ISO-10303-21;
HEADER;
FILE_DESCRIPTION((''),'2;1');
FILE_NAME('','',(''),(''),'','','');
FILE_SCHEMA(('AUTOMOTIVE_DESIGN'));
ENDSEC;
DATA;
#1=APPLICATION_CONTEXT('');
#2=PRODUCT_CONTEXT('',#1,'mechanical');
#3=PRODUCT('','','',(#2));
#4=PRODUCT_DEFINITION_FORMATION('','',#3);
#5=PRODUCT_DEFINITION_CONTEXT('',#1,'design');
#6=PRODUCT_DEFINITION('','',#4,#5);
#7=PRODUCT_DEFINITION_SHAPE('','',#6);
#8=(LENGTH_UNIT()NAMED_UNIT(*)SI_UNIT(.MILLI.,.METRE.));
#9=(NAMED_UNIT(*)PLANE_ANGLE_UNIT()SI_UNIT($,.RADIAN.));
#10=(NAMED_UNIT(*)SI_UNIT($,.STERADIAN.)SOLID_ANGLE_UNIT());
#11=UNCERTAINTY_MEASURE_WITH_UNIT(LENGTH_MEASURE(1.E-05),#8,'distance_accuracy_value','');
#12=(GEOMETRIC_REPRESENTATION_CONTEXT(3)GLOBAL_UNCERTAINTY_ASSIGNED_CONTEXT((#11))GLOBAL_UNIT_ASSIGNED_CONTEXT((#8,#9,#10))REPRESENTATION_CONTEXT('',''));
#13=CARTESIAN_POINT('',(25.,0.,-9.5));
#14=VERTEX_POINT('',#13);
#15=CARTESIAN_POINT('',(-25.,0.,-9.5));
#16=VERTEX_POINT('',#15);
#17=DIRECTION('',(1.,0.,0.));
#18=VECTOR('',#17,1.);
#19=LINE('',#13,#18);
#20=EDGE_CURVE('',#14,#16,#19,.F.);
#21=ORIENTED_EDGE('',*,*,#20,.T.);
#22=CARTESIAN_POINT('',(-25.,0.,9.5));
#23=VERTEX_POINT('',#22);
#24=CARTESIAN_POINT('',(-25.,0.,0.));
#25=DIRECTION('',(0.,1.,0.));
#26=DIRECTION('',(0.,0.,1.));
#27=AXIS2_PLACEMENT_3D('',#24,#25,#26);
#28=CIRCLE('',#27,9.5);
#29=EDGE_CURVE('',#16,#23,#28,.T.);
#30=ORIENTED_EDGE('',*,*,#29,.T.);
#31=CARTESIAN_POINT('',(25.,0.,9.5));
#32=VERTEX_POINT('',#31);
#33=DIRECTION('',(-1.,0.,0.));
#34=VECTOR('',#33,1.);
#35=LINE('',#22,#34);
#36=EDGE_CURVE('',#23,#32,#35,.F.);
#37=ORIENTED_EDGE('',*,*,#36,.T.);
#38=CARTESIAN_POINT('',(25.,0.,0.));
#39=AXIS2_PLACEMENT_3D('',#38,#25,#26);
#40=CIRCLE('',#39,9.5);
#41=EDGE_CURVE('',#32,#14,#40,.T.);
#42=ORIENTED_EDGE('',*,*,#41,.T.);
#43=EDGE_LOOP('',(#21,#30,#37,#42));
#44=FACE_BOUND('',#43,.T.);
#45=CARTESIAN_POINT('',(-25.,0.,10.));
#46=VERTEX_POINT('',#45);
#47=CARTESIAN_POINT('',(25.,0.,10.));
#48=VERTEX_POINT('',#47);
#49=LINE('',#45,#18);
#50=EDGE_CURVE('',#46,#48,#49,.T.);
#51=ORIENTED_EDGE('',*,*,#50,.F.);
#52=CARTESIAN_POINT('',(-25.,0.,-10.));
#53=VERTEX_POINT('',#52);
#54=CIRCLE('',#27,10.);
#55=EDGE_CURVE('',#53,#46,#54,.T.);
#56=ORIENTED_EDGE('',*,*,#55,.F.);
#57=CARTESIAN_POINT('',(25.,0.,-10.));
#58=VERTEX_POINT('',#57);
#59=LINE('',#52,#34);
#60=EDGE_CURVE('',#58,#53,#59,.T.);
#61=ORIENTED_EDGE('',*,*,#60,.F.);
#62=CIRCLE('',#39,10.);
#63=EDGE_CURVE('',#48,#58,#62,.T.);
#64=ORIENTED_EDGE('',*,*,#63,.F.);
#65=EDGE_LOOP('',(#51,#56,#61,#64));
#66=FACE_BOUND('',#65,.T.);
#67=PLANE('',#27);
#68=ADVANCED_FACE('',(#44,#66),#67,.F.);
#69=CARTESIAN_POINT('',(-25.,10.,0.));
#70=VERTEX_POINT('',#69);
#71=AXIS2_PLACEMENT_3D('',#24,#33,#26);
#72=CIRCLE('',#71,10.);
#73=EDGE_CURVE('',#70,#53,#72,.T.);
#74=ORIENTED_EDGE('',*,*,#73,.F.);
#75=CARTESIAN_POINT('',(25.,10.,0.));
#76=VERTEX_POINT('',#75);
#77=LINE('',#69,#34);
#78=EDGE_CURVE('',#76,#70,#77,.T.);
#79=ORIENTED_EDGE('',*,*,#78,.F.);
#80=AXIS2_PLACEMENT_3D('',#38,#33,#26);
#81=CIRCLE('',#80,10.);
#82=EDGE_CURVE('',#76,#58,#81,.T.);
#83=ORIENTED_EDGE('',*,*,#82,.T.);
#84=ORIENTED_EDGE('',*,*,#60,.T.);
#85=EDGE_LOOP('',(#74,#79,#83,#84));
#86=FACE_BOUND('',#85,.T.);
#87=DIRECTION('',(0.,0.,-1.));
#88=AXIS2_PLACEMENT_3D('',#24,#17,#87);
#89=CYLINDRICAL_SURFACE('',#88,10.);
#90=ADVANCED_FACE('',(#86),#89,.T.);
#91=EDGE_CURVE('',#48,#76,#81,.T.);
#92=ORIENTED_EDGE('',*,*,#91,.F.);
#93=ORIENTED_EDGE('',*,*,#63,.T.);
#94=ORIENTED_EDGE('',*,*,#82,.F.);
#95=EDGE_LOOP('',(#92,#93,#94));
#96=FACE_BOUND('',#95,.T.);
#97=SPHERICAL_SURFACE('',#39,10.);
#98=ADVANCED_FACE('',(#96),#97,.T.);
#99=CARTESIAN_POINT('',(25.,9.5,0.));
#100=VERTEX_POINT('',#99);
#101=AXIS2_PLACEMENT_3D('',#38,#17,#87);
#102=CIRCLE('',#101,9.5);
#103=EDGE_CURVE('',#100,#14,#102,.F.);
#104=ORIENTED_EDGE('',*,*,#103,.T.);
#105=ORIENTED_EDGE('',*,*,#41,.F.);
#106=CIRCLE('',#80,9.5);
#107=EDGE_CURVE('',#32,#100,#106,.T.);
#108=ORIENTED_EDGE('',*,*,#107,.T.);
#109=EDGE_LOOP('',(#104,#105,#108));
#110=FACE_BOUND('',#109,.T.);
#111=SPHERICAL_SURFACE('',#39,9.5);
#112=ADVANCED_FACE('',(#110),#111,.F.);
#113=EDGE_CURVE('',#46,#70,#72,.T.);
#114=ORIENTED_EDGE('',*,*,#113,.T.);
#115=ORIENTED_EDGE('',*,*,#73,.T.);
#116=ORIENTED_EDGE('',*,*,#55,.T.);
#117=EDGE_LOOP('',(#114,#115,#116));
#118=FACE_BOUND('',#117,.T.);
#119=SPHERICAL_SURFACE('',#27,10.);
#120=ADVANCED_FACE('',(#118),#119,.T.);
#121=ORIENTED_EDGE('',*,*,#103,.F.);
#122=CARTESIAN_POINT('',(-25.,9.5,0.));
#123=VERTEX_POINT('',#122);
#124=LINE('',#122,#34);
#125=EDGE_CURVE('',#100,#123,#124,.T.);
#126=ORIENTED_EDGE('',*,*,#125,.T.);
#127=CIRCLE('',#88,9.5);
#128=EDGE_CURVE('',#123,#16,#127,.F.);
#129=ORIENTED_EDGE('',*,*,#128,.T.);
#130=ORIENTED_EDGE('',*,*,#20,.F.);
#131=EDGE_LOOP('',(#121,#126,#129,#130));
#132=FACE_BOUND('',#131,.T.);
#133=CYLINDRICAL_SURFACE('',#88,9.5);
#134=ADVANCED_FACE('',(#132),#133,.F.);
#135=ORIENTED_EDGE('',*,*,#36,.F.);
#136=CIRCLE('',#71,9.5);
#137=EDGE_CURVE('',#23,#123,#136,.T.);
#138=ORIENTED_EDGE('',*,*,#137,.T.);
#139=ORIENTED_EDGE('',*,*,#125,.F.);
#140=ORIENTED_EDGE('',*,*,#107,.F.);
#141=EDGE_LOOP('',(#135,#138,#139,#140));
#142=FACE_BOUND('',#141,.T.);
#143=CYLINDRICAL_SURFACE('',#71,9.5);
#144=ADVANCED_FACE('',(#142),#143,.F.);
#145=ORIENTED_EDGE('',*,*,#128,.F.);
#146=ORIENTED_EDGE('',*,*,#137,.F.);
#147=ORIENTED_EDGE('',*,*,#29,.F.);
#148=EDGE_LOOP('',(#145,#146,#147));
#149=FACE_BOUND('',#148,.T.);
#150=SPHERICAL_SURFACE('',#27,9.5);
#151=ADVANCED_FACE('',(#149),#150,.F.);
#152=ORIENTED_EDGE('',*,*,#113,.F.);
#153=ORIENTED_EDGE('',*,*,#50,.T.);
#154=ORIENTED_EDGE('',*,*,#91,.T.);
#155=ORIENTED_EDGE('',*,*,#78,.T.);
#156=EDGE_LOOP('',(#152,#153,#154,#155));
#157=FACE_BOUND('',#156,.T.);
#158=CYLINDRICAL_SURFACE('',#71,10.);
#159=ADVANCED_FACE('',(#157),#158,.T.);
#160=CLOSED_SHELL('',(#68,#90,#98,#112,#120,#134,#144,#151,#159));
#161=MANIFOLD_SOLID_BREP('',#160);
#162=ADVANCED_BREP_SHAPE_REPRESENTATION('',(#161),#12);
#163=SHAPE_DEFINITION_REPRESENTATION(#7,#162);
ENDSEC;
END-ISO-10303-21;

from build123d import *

# Parameters (mm, degrees)
BOSS_EXTRUDE1_DEPTH = 10
FILLET1_R           = 10


# Read off the part's stored shape, not the designer's step: Shell1
with BuildPart() as part:
    # Sketch1 → Boss-Extrude1 (new body)
    with BuildSketch(Plane(origin=(0, 0, 0), x_dir=(1, 0, 0), z_dir=(0, 1, 0))):
        with BuildLine():
            Line((-25, 10), (25, 10))
            ThreePointArc((25, 10), (35, 0), (25, -10))
            Line((25, -10), (-25, -10))
            ThreePointArc((-25, -10), (-35, 0), (-25, 10))
        make_face()
    extrude(amount=BOSS_EXTRUDE1_DEPTH)

    # Fillet1
    fillet1_edges = [part.edges().sort_by_distance(p)[0] for p in [
        (-35, 10, 0),
        (0, 10, -10),
        (35, 10, 0),
        (0, 10, 10),
    ]]
    fillet(fillet1_edges, radius=FILLET1_R - 0.0001)  # a hair under: the kernel refuses the full size

    # Shell1 outline → Shell1 (revolve, cut)
    with BuildSketch(Plane.YX):
        with BuildLine():
            Line((9.5, -25), (9.5, 25))
            ThreePointArc((9.5, 25), (6.717514421, 31.717514421), (0, 34.5))
            Line((0, 34.5), (0, -34.5))
            ThreePointArc((0, -34.5), (6.717514421, -31.717514421), (9.5, -25))
        make_face()
    revolve(axis=Axis((0, 0, 0), (1, 0, 0)), mode=Mode.SUBTRACT)


solid = part.part
